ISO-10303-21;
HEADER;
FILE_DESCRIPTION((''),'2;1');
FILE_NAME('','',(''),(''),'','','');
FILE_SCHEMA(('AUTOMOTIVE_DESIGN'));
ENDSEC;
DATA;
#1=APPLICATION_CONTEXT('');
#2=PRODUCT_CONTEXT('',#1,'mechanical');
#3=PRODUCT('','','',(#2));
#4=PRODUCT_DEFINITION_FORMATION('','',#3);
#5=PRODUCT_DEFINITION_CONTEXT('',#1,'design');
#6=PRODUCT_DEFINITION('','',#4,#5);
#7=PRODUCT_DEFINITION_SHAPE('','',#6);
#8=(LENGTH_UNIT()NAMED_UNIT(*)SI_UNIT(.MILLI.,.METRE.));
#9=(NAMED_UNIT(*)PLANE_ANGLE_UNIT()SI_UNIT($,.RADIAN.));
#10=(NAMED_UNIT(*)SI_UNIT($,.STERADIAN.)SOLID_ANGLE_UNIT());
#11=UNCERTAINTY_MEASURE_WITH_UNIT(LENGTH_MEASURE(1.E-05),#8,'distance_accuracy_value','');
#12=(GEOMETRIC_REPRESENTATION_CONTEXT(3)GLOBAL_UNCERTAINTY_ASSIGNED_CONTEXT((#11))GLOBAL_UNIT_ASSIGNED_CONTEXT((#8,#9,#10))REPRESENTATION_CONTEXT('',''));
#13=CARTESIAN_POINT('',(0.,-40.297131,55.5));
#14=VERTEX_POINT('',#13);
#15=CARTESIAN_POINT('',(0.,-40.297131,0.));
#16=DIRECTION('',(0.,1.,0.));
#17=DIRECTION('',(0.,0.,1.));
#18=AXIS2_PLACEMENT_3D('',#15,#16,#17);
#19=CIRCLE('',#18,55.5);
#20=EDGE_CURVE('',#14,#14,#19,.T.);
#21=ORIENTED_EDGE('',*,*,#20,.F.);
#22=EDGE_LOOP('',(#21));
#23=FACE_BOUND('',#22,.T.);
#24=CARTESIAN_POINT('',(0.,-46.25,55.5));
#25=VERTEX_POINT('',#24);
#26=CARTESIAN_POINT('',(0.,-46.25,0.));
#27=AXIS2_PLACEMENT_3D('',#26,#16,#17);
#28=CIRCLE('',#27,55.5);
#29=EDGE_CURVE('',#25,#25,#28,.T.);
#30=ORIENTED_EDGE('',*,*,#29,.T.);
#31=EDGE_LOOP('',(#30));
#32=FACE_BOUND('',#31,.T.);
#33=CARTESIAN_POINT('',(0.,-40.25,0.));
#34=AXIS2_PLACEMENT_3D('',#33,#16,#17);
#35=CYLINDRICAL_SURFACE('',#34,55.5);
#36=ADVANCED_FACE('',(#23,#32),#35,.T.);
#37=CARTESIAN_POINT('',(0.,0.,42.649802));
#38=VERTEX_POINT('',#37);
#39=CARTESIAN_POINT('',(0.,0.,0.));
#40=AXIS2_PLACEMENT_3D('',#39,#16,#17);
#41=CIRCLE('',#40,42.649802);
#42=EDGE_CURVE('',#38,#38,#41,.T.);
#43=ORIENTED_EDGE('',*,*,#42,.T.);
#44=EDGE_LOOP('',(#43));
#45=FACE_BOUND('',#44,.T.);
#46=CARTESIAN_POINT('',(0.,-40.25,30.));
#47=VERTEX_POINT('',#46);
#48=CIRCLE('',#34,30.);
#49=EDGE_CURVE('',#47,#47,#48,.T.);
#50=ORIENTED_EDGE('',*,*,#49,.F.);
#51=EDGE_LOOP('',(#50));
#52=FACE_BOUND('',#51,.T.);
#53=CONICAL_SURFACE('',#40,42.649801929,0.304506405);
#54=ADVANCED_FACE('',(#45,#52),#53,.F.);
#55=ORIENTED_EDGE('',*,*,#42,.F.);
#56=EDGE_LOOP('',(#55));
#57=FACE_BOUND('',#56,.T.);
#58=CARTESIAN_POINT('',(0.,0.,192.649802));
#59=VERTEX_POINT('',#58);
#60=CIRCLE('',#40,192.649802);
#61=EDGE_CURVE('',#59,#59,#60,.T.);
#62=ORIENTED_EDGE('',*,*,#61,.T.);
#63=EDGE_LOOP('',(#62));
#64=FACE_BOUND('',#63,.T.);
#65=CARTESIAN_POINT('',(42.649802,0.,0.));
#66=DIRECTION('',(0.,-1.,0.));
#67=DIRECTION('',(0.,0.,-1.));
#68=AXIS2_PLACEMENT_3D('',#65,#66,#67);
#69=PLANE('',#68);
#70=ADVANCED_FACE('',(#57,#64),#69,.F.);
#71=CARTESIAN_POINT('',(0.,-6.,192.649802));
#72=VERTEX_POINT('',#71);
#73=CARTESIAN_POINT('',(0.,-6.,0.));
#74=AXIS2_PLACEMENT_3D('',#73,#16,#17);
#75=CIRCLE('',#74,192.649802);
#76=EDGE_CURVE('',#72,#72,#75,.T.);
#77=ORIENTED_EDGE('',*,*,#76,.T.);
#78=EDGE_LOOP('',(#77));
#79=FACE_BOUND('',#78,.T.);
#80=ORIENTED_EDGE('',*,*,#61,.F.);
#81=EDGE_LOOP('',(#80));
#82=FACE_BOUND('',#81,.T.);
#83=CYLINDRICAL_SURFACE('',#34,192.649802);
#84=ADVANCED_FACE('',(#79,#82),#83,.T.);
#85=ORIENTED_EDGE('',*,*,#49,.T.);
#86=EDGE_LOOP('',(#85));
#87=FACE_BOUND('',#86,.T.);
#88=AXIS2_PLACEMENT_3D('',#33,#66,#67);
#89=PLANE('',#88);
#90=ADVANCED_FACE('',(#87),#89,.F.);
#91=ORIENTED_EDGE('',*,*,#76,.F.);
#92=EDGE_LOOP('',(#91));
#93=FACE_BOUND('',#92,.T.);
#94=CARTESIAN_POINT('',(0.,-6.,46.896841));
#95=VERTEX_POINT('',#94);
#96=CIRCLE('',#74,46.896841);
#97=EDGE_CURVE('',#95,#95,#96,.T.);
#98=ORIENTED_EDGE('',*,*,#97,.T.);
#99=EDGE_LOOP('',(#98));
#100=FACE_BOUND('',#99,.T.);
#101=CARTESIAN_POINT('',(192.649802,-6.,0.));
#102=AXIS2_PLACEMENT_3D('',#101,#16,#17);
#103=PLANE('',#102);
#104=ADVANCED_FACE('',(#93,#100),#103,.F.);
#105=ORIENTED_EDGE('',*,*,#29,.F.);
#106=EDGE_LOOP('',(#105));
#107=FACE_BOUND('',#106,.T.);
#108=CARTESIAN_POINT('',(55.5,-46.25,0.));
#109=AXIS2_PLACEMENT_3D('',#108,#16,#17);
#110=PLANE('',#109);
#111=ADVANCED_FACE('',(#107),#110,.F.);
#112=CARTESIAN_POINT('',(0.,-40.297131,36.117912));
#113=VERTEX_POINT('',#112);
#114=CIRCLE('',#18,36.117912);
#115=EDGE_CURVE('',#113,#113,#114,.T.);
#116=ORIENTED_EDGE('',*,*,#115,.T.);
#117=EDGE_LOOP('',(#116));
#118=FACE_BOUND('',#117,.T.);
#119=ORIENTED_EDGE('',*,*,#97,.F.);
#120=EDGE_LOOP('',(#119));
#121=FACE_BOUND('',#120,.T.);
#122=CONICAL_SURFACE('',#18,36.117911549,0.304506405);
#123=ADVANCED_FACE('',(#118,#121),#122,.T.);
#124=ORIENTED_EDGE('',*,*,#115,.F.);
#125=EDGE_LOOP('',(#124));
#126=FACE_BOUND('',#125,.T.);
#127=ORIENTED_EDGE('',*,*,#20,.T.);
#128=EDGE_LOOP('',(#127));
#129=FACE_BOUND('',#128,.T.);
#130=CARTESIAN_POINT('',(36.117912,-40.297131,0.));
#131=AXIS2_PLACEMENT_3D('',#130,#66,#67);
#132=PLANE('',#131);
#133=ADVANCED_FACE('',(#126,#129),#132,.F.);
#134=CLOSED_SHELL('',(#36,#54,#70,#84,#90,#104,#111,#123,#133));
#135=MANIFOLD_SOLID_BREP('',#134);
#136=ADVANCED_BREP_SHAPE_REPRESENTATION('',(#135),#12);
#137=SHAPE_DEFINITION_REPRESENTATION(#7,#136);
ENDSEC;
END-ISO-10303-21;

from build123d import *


with BuildPart() as part:
    # Sketch1 → Revolve2 (revolve)
    with BuildSketch(Plane.XY, mode=Mode.PRIVATE) as revolve2_sk:
        Polygon((0, -40.25), (0, -46.25), (55.5, -46.25), (55.5, -40.29713119), (36.117911549, -40.29713119), (46.896841146, -6), (192.649801929, -6), (192.649801929, 0), (42.649801929, 0), (30, -40.25), align=None)
    revolve(revolve2_sk.sketch.rotate(Axis((0, -40.25, 0), (0, -1, 0)), 90), axis=Axis((0, -40.25, 0), (0, -1, 0)))


solid = part.part
